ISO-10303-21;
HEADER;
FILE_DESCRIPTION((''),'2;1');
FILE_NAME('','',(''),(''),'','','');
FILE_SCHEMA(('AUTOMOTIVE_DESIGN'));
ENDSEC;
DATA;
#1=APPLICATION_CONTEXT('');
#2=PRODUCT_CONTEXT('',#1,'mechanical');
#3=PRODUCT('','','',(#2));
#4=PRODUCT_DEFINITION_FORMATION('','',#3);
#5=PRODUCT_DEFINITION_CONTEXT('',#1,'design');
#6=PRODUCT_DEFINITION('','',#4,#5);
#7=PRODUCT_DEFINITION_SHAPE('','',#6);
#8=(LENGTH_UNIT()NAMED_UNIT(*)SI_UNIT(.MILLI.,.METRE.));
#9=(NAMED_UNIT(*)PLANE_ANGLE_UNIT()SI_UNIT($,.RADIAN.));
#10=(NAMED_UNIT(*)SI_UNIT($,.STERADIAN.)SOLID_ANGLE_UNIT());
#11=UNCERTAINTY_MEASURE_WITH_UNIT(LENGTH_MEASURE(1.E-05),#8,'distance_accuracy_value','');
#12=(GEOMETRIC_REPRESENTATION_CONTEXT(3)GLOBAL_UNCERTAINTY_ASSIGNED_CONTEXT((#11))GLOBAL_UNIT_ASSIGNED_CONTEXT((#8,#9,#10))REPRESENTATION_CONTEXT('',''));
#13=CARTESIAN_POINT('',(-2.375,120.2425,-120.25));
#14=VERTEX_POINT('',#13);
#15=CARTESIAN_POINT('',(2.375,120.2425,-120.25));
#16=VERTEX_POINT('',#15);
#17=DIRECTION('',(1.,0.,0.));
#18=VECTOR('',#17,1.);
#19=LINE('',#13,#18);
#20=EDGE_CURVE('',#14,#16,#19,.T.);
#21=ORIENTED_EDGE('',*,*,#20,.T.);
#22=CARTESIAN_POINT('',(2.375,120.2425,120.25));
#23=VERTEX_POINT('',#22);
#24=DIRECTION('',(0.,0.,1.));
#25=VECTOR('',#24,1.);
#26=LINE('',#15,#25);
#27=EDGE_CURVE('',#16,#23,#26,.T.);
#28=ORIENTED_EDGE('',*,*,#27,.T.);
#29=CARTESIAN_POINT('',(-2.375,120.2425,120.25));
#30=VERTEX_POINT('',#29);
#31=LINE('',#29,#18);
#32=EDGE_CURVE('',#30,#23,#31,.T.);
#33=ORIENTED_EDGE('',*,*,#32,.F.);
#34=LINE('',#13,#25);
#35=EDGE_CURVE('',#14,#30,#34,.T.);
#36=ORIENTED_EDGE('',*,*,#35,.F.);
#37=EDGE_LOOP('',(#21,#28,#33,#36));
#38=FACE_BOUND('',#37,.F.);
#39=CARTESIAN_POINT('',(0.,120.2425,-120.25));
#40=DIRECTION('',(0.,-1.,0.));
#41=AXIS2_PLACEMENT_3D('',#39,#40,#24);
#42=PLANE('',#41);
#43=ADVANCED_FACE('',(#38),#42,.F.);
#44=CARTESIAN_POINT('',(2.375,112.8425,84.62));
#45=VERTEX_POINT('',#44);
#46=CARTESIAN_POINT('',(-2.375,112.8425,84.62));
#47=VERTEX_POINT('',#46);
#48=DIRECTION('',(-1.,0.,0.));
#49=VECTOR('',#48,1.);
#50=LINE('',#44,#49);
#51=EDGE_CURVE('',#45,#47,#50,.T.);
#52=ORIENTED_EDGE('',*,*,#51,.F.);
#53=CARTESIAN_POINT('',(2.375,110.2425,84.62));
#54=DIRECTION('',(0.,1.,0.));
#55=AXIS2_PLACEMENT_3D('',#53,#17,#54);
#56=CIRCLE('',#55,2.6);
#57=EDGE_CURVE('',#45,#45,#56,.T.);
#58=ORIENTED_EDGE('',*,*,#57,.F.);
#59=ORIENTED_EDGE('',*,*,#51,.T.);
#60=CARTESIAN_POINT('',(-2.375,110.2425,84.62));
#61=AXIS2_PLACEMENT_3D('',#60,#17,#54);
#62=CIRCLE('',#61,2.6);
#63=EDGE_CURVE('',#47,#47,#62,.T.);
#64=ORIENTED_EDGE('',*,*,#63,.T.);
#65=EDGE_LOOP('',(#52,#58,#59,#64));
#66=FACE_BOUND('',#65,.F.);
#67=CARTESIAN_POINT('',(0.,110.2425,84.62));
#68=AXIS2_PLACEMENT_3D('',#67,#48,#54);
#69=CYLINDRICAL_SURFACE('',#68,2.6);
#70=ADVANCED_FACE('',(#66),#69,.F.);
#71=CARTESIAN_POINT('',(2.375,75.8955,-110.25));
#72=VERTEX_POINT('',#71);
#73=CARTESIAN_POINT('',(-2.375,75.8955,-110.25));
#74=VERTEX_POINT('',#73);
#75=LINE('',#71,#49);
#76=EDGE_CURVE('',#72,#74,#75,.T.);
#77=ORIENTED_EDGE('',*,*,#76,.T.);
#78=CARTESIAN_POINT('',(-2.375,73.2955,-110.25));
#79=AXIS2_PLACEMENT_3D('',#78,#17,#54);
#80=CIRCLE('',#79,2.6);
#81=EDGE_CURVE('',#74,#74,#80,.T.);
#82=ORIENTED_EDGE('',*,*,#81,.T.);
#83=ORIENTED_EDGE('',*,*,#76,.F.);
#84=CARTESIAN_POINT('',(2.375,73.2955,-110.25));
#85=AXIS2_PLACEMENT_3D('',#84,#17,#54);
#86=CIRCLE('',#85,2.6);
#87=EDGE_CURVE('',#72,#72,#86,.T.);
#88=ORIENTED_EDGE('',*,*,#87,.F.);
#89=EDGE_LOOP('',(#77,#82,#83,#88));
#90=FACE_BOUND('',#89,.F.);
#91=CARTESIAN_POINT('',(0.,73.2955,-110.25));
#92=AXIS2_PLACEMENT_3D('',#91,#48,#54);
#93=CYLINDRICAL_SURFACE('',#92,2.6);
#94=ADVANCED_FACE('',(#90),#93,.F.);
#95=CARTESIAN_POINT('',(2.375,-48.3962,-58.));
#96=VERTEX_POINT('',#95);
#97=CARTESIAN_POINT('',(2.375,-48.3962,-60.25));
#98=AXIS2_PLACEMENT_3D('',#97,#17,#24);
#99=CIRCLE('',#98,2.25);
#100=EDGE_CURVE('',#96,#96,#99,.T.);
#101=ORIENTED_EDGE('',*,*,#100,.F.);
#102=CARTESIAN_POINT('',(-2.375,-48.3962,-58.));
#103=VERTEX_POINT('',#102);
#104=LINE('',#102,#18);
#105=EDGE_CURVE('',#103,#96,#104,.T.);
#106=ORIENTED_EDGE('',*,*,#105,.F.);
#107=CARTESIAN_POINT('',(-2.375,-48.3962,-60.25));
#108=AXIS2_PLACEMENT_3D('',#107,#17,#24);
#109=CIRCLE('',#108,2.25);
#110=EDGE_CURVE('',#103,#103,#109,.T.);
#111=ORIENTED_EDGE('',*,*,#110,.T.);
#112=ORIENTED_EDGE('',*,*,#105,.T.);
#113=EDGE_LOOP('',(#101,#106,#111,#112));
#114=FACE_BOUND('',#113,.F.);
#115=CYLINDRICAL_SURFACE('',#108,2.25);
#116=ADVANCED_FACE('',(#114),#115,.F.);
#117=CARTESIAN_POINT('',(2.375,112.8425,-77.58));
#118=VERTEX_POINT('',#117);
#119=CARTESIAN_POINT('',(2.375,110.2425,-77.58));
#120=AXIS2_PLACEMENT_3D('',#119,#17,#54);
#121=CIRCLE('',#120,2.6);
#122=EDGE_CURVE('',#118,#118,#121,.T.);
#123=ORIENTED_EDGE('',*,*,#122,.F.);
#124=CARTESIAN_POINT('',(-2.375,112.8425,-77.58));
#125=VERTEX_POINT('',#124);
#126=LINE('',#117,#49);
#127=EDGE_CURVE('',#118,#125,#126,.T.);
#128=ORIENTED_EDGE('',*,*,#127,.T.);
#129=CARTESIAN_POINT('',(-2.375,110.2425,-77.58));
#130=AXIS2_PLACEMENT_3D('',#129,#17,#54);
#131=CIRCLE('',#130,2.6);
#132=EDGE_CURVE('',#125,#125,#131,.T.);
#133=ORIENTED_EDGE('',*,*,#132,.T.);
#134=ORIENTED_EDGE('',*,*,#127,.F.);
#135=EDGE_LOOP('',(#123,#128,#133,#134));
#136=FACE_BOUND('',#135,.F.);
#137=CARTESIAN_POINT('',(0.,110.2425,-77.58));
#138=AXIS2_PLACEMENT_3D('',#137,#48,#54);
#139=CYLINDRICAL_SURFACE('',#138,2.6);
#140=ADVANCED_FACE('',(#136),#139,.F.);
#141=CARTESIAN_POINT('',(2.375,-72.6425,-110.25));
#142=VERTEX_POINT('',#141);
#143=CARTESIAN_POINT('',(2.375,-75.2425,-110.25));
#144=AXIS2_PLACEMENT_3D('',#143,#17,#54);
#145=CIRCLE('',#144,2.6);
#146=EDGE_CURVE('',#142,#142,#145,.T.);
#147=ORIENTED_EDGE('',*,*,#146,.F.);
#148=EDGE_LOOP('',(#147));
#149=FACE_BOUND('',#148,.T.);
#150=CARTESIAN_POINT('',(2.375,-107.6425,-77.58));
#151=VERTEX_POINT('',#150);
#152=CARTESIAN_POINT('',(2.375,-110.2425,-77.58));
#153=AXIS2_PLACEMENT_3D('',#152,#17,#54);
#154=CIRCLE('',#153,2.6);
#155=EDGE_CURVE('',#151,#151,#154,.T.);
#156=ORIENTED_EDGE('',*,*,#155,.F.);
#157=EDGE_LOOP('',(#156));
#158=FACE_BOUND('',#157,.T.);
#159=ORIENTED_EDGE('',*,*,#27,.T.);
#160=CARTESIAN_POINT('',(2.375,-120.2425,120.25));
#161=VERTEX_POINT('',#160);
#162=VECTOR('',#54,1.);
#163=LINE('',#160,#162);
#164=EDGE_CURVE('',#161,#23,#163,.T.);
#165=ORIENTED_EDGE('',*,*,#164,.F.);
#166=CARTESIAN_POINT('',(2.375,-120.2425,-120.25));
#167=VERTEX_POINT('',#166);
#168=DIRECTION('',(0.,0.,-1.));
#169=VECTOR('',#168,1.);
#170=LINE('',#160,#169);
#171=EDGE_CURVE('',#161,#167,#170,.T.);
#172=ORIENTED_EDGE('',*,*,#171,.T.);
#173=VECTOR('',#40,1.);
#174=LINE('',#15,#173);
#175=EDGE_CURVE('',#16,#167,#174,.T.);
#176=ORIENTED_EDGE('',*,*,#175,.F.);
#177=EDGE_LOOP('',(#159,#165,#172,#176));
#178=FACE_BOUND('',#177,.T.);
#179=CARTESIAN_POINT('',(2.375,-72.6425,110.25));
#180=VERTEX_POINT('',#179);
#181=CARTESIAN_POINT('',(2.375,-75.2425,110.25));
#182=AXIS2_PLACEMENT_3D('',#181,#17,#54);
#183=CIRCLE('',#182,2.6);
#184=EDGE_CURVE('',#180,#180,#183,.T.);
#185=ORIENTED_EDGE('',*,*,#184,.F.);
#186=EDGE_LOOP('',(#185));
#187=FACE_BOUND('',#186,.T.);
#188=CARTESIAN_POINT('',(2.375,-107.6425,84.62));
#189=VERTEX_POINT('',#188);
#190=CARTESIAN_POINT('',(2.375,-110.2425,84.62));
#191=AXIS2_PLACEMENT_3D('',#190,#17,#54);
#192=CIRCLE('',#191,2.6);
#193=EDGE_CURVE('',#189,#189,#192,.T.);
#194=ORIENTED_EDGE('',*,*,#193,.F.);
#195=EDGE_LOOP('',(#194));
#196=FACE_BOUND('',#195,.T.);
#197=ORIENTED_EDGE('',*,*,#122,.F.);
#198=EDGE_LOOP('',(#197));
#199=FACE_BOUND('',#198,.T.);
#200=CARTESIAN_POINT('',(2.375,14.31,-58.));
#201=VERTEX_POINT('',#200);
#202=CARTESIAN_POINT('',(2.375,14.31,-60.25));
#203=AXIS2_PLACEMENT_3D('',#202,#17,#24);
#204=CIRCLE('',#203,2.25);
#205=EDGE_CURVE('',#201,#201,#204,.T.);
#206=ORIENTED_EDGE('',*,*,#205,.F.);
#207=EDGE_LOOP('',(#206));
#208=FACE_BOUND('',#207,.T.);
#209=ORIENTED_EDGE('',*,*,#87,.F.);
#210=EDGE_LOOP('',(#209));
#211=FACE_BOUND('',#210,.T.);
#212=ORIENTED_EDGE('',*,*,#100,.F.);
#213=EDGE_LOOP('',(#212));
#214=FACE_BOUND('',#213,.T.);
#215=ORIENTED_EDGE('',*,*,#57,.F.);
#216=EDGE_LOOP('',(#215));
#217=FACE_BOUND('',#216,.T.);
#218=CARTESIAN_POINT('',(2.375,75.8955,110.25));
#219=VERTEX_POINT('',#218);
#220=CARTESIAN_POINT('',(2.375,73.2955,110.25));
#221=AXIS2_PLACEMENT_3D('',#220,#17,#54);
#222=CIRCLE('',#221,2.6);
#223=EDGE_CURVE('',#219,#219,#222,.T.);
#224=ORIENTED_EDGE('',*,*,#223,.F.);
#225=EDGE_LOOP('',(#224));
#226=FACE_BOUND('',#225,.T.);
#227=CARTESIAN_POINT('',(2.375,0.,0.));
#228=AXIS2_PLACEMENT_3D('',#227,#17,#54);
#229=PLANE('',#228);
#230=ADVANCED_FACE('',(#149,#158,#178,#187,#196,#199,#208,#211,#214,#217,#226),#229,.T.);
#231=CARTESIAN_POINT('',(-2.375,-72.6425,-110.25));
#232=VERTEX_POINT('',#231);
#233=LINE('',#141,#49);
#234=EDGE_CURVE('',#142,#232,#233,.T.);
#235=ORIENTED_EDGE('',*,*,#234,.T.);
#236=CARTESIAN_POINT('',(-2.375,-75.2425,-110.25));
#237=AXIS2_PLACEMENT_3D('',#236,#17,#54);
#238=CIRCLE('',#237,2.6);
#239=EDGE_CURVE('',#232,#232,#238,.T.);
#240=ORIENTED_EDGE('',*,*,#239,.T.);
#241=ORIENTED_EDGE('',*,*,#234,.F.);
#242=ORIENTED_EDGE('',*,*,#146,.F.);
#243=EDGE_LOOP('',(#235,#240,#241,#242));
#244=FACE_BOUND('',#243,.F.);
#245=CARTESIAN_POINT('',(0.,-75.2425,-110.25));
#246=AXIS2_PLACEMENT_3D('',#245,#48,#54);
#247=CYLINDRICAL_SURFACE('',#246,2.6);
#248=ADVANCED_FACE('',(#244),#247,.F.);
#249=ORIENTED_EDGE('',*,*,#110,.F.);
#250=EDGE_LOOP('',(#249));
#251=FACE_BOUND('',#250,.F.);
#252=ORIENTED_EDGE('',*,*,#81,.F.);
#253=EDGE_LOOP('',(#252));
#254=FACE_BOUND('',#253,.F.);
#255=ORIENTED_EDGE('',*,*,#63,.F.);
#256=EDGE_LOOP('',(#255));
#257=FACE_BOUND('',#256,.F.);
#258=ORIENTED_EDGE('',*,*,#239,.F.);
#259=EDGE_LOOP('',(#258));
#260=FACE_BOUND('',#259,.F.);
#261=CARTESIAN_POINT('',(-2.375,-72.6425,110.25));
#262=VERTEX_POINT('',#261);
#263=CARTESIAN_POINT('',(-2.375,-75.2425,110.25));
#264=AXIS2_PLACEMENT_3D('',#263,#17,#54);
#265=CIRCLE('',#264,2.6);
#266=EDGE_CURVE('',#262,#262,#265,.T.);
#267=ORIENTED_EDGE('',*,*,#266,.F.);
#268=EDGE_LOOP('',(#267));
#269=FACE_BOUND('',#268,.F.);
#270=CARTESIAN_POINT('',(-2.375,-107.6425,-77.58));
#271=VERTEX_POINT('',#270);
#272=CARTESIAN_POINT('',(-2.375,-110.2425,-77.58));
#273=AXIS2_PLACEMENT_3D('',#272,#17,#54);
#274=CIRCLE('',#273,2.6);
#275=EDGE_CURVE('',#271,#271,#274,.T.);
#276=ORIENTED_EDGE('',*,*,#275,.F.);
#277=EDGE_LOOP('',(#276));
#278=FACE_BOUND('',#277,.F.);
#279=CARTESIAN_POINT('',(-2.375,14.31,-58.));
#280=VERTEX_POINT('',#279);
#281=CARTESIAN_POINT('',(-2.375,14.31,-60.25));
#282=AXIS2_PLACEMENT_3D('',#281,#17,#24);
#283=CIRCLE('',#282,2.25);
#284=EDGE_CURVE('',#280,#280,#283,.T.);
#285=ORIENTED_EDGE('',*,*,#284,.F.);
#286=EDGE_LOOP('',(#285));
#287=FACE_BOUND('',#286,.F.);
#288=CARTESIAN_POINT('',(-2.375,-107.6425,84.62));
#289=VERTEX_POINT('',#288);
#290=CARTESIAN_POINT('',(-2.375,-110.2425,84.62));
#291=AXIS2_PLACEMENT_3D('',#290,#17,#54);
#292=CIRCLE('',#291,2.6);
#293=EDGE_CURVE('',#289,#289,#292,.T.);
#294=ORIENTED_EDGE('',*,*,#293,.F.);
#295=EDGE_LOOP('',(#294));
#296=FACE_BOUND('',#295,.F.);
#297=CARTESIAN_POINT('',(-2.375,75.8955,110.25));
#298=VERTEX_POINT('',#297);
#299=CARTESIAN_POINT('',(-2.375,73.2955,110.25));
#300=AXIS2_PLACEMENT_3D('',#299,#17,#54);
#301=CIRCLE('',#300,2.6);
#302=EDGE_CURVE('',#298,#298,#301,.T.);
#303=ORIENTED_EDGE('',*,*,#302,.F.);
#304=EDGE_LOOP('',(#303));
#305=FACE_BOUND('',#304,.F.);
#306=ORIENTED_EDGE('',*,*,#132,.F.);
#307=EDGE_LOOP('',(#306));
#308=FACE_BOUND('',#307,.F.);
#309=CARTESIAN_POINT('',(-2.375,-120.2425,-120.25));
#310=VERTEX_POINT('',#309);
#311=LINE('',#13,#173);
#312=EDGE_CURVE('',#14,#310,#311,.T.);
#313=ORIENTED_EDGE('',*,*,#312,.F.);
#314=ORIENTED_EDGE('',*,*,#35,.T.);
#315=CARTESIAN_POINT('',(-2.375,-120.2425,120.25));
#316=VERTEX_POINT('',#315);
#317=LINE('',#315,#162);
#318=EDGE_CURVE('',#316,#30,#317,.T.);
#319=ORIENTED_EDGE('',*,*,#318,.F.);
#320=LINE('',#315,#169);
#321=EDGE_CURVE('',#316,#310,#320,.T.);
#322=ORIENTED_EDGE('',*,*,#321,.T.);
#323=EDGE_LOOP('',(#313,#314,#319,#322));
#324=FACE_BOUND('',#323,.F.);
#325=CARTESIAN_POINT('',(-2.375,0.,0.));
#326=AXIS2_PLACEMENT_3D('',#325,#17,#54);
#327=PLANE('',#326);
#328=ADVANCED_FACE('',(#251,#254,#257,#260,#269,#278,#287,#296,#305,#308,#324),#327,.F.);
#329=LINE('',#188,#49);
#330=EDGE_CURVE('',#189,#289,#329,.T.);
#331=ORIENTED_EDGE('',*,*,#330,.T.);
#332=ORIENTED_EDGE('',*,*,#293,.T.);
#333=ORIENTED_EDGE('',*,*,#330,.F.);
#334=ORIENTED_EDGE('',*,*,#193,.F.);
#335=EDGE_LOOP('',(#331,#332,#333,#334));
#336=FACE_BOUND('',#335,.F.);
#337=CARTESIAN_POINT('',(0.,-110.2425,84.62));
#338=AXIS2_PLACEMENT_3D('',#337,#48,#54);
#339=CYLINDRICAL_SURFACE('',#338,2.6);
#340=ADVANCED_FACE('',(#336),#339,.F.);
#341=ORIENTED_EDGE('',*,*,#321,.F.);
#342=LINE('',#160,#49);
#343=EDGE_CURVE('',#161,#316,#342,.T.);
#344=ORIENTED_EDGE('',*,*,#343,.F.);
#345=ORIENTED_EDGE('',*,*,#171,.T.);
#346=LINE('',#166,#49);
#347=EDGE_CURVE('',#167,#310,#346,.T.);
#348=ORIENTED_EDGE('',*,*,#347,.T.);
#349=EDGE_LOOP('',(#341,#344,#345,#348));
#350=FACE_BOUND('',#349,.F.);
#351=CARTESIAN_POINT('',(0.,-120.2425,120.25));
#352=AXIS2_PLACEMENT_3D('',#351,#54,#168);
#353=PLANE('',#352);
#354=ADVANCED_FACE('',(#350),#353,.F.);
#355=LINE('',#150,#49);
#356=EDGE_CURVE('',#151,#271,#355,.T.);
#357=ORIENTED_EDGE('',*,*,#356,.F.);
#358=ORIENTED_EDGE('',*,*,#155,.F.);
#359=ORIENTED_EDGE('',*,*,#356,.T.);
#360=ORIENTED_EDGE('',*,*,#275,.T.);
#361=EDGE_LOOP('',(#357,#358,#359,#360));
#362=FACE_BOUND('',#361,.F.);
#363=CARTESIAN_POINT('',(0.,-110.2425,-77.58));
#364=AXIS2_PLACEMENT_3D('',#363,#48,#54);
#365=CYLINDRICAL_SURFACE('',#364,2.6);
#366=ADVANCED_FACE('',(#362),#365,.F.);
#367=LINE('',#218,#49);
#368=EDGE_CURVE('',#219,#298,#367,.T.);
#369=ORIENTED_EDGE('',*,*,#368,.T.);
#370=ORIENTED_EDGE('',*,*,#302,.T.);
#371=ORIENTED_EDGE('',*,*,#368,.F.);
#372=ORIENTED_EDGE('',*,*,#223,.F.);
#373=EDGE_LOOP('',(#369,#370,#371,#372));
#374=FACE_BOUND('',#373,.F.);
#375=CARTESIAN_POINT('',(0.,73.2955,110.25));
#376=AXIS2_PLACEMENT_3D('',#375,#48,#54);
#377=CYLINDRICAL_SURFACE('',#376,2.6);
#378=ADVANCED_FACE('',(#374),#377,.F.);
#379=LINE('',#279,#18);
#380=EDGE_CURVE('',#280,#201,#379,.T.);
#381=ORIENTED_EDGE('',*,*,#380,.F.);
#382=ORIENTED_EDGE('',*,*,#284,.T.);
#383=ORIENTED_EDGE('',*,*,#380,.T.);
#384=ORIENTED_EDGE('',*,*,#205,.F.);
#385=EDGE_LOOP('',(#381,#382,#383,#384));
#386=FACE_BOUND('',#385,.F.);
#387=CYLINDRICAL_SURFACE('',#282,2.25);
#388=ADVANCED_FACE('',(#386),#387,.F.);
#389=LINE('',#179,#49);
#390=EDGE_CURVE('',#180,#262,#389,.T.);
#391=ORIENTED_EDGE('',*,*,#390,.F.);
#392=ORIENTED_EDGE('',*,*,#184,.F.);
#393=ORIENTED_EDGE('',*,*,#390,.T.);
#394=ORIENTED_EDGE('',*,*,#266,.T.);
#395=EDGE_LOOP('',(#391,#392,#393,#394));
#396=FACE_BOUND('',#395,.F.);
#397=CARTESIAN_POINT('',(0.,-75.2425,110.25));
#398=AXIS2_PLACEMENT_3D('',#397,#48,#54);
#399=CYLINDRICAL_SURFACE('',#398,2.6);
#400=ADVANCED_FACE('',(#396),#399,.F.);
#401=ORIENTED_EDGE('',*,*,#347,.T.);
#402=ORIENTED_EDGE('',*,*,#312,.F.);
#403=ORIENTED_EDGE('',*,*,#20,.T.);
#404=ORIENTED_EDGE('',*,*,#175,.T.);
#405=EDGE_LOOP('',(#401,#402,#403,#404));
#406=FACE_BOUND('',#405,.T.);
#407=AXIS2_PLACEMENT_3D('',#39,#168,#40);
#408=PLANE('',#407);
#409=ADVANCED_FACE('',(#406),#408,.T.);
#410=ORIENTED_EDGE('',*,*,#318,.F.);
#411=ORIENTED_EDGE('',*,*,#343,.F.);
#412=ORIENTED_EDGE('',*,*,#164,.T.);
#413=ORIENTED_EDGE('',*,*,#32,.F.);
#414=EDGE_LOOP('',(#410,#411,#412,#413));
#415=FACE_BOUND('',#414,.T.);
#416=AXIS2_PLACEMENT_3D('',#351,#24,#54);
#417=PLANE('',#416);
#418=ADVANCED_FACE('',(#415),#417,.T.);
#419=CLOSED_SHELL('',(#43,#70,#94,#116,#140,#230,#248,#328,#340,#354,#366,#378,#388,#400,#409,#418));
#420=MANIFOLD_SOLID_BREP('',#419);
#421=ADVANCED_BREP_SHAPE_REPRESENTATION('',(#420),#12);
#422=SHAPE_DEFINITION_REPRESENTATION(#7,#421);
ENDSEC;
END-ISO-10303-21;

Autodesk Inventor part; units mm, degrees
ref_plane "YZ Plane" through (0, 0, 0) normal (1, 0, 0) x (0, 1, 0)
ref_plane "XZ Plane" through (0, 0, 0) normal (0, 1, 0) x (-1, 0, 0)
ref_plane "XY Plane" through (0, 0, 0) normal (0, 0, 1) x (1, 0, 0)
sketch "Face" plane through (0, 0, 0) normal (0, 0, 1) x (1, 0, 0)
  circle A0 centre (230.4851, 204.87) radius 2.6
  circle A1 centre (45, 10) radius 2.6
  circle A2 centre (193.5381, 10) radius 2.6
  circle A3 centre (10, 204.87) radius 2.6
  circle A4 centre (193.5381, 230.5) radius 2.6
  circle A5 centre (10, 42.67) radius 2.6
  circle A6 centre (230.4851, 42.67) radius 2.6
  circle A7 centre (45, 230.5) radius 2.6
  line L0 (240.4851, 0) -> (0, 0)
  line L1 (240.4851, 0) -> (240.4851, 240.5)
  line L2 (0, 240.5) -> (240.4851, 240.5)
  line L3 (0, 240.5) -> (0, 0)
  point P0 (115.8277, 117.0745)
  point P1 (0, 0)
sketch "Sketch1" plane through (0, 0, 0) normal (1, 0, 0) x (0, 1, 0)
  circle A0 centre (110.2425, 84.62) radius 2.6
  circle A1 centre (-75.2425, -110.25) radius 2.6
  circle A2 centre (73.2955, -110.25) radius 2.6
  circle A3 centre (-110.2425, 84.62) radius 2.6
  circle A4 centre (73.2955, 110.25) radius 2.6
  circle A5 centre (-110.2425, -77.58) radius 2.6
  circle A6 centre (110.2425, -77.58) radius 2.6
  circle A7 centre (-75.2425, 110.25) radius 2.6
  line L0 (120.2425, -120.25) -> (-120.2425, -120.25)
  line L1 (120.2425, -120.25) -> (120.2425, 120.25)
  line L2 (-120.2425, 120.25) -> (120.2425, 120.25)
  line L3 (-120.2425, 120.25) -> (-120.2425, -120.25)
  point P0 (0, 0)
  point P1 (-120.2425, 0)
  point P2 (0, 120.25)
extrude "Extrusion1" add sketch "Sketch1" along normal mid plane 4.75
sketch "Sketch2" plane through (-2.375, 0, 0) normal (-1, 0, 0) x (0, 0, 1)
  arc A0 (-55.5931, 11.2793) -> (-64.9069, 11.2793) centre (-60.25, 14.31) ccw projected
  arc A1 (-64.9069, -45.3655) -> (-55.5931, -45.3655) centre (-60.25, -48.3962) ccw projected
hole "Hole1" at (-2.375, 14.31, -60.25) at (-2.375, -48.3962, -60.25) direction (1, 0, 0) diameter 4.5 end through all clearance for "Socket Head Cap Screw" size "M4" standard "Ansi Metric M Profile"
properties part number "BREEZE-M07"
